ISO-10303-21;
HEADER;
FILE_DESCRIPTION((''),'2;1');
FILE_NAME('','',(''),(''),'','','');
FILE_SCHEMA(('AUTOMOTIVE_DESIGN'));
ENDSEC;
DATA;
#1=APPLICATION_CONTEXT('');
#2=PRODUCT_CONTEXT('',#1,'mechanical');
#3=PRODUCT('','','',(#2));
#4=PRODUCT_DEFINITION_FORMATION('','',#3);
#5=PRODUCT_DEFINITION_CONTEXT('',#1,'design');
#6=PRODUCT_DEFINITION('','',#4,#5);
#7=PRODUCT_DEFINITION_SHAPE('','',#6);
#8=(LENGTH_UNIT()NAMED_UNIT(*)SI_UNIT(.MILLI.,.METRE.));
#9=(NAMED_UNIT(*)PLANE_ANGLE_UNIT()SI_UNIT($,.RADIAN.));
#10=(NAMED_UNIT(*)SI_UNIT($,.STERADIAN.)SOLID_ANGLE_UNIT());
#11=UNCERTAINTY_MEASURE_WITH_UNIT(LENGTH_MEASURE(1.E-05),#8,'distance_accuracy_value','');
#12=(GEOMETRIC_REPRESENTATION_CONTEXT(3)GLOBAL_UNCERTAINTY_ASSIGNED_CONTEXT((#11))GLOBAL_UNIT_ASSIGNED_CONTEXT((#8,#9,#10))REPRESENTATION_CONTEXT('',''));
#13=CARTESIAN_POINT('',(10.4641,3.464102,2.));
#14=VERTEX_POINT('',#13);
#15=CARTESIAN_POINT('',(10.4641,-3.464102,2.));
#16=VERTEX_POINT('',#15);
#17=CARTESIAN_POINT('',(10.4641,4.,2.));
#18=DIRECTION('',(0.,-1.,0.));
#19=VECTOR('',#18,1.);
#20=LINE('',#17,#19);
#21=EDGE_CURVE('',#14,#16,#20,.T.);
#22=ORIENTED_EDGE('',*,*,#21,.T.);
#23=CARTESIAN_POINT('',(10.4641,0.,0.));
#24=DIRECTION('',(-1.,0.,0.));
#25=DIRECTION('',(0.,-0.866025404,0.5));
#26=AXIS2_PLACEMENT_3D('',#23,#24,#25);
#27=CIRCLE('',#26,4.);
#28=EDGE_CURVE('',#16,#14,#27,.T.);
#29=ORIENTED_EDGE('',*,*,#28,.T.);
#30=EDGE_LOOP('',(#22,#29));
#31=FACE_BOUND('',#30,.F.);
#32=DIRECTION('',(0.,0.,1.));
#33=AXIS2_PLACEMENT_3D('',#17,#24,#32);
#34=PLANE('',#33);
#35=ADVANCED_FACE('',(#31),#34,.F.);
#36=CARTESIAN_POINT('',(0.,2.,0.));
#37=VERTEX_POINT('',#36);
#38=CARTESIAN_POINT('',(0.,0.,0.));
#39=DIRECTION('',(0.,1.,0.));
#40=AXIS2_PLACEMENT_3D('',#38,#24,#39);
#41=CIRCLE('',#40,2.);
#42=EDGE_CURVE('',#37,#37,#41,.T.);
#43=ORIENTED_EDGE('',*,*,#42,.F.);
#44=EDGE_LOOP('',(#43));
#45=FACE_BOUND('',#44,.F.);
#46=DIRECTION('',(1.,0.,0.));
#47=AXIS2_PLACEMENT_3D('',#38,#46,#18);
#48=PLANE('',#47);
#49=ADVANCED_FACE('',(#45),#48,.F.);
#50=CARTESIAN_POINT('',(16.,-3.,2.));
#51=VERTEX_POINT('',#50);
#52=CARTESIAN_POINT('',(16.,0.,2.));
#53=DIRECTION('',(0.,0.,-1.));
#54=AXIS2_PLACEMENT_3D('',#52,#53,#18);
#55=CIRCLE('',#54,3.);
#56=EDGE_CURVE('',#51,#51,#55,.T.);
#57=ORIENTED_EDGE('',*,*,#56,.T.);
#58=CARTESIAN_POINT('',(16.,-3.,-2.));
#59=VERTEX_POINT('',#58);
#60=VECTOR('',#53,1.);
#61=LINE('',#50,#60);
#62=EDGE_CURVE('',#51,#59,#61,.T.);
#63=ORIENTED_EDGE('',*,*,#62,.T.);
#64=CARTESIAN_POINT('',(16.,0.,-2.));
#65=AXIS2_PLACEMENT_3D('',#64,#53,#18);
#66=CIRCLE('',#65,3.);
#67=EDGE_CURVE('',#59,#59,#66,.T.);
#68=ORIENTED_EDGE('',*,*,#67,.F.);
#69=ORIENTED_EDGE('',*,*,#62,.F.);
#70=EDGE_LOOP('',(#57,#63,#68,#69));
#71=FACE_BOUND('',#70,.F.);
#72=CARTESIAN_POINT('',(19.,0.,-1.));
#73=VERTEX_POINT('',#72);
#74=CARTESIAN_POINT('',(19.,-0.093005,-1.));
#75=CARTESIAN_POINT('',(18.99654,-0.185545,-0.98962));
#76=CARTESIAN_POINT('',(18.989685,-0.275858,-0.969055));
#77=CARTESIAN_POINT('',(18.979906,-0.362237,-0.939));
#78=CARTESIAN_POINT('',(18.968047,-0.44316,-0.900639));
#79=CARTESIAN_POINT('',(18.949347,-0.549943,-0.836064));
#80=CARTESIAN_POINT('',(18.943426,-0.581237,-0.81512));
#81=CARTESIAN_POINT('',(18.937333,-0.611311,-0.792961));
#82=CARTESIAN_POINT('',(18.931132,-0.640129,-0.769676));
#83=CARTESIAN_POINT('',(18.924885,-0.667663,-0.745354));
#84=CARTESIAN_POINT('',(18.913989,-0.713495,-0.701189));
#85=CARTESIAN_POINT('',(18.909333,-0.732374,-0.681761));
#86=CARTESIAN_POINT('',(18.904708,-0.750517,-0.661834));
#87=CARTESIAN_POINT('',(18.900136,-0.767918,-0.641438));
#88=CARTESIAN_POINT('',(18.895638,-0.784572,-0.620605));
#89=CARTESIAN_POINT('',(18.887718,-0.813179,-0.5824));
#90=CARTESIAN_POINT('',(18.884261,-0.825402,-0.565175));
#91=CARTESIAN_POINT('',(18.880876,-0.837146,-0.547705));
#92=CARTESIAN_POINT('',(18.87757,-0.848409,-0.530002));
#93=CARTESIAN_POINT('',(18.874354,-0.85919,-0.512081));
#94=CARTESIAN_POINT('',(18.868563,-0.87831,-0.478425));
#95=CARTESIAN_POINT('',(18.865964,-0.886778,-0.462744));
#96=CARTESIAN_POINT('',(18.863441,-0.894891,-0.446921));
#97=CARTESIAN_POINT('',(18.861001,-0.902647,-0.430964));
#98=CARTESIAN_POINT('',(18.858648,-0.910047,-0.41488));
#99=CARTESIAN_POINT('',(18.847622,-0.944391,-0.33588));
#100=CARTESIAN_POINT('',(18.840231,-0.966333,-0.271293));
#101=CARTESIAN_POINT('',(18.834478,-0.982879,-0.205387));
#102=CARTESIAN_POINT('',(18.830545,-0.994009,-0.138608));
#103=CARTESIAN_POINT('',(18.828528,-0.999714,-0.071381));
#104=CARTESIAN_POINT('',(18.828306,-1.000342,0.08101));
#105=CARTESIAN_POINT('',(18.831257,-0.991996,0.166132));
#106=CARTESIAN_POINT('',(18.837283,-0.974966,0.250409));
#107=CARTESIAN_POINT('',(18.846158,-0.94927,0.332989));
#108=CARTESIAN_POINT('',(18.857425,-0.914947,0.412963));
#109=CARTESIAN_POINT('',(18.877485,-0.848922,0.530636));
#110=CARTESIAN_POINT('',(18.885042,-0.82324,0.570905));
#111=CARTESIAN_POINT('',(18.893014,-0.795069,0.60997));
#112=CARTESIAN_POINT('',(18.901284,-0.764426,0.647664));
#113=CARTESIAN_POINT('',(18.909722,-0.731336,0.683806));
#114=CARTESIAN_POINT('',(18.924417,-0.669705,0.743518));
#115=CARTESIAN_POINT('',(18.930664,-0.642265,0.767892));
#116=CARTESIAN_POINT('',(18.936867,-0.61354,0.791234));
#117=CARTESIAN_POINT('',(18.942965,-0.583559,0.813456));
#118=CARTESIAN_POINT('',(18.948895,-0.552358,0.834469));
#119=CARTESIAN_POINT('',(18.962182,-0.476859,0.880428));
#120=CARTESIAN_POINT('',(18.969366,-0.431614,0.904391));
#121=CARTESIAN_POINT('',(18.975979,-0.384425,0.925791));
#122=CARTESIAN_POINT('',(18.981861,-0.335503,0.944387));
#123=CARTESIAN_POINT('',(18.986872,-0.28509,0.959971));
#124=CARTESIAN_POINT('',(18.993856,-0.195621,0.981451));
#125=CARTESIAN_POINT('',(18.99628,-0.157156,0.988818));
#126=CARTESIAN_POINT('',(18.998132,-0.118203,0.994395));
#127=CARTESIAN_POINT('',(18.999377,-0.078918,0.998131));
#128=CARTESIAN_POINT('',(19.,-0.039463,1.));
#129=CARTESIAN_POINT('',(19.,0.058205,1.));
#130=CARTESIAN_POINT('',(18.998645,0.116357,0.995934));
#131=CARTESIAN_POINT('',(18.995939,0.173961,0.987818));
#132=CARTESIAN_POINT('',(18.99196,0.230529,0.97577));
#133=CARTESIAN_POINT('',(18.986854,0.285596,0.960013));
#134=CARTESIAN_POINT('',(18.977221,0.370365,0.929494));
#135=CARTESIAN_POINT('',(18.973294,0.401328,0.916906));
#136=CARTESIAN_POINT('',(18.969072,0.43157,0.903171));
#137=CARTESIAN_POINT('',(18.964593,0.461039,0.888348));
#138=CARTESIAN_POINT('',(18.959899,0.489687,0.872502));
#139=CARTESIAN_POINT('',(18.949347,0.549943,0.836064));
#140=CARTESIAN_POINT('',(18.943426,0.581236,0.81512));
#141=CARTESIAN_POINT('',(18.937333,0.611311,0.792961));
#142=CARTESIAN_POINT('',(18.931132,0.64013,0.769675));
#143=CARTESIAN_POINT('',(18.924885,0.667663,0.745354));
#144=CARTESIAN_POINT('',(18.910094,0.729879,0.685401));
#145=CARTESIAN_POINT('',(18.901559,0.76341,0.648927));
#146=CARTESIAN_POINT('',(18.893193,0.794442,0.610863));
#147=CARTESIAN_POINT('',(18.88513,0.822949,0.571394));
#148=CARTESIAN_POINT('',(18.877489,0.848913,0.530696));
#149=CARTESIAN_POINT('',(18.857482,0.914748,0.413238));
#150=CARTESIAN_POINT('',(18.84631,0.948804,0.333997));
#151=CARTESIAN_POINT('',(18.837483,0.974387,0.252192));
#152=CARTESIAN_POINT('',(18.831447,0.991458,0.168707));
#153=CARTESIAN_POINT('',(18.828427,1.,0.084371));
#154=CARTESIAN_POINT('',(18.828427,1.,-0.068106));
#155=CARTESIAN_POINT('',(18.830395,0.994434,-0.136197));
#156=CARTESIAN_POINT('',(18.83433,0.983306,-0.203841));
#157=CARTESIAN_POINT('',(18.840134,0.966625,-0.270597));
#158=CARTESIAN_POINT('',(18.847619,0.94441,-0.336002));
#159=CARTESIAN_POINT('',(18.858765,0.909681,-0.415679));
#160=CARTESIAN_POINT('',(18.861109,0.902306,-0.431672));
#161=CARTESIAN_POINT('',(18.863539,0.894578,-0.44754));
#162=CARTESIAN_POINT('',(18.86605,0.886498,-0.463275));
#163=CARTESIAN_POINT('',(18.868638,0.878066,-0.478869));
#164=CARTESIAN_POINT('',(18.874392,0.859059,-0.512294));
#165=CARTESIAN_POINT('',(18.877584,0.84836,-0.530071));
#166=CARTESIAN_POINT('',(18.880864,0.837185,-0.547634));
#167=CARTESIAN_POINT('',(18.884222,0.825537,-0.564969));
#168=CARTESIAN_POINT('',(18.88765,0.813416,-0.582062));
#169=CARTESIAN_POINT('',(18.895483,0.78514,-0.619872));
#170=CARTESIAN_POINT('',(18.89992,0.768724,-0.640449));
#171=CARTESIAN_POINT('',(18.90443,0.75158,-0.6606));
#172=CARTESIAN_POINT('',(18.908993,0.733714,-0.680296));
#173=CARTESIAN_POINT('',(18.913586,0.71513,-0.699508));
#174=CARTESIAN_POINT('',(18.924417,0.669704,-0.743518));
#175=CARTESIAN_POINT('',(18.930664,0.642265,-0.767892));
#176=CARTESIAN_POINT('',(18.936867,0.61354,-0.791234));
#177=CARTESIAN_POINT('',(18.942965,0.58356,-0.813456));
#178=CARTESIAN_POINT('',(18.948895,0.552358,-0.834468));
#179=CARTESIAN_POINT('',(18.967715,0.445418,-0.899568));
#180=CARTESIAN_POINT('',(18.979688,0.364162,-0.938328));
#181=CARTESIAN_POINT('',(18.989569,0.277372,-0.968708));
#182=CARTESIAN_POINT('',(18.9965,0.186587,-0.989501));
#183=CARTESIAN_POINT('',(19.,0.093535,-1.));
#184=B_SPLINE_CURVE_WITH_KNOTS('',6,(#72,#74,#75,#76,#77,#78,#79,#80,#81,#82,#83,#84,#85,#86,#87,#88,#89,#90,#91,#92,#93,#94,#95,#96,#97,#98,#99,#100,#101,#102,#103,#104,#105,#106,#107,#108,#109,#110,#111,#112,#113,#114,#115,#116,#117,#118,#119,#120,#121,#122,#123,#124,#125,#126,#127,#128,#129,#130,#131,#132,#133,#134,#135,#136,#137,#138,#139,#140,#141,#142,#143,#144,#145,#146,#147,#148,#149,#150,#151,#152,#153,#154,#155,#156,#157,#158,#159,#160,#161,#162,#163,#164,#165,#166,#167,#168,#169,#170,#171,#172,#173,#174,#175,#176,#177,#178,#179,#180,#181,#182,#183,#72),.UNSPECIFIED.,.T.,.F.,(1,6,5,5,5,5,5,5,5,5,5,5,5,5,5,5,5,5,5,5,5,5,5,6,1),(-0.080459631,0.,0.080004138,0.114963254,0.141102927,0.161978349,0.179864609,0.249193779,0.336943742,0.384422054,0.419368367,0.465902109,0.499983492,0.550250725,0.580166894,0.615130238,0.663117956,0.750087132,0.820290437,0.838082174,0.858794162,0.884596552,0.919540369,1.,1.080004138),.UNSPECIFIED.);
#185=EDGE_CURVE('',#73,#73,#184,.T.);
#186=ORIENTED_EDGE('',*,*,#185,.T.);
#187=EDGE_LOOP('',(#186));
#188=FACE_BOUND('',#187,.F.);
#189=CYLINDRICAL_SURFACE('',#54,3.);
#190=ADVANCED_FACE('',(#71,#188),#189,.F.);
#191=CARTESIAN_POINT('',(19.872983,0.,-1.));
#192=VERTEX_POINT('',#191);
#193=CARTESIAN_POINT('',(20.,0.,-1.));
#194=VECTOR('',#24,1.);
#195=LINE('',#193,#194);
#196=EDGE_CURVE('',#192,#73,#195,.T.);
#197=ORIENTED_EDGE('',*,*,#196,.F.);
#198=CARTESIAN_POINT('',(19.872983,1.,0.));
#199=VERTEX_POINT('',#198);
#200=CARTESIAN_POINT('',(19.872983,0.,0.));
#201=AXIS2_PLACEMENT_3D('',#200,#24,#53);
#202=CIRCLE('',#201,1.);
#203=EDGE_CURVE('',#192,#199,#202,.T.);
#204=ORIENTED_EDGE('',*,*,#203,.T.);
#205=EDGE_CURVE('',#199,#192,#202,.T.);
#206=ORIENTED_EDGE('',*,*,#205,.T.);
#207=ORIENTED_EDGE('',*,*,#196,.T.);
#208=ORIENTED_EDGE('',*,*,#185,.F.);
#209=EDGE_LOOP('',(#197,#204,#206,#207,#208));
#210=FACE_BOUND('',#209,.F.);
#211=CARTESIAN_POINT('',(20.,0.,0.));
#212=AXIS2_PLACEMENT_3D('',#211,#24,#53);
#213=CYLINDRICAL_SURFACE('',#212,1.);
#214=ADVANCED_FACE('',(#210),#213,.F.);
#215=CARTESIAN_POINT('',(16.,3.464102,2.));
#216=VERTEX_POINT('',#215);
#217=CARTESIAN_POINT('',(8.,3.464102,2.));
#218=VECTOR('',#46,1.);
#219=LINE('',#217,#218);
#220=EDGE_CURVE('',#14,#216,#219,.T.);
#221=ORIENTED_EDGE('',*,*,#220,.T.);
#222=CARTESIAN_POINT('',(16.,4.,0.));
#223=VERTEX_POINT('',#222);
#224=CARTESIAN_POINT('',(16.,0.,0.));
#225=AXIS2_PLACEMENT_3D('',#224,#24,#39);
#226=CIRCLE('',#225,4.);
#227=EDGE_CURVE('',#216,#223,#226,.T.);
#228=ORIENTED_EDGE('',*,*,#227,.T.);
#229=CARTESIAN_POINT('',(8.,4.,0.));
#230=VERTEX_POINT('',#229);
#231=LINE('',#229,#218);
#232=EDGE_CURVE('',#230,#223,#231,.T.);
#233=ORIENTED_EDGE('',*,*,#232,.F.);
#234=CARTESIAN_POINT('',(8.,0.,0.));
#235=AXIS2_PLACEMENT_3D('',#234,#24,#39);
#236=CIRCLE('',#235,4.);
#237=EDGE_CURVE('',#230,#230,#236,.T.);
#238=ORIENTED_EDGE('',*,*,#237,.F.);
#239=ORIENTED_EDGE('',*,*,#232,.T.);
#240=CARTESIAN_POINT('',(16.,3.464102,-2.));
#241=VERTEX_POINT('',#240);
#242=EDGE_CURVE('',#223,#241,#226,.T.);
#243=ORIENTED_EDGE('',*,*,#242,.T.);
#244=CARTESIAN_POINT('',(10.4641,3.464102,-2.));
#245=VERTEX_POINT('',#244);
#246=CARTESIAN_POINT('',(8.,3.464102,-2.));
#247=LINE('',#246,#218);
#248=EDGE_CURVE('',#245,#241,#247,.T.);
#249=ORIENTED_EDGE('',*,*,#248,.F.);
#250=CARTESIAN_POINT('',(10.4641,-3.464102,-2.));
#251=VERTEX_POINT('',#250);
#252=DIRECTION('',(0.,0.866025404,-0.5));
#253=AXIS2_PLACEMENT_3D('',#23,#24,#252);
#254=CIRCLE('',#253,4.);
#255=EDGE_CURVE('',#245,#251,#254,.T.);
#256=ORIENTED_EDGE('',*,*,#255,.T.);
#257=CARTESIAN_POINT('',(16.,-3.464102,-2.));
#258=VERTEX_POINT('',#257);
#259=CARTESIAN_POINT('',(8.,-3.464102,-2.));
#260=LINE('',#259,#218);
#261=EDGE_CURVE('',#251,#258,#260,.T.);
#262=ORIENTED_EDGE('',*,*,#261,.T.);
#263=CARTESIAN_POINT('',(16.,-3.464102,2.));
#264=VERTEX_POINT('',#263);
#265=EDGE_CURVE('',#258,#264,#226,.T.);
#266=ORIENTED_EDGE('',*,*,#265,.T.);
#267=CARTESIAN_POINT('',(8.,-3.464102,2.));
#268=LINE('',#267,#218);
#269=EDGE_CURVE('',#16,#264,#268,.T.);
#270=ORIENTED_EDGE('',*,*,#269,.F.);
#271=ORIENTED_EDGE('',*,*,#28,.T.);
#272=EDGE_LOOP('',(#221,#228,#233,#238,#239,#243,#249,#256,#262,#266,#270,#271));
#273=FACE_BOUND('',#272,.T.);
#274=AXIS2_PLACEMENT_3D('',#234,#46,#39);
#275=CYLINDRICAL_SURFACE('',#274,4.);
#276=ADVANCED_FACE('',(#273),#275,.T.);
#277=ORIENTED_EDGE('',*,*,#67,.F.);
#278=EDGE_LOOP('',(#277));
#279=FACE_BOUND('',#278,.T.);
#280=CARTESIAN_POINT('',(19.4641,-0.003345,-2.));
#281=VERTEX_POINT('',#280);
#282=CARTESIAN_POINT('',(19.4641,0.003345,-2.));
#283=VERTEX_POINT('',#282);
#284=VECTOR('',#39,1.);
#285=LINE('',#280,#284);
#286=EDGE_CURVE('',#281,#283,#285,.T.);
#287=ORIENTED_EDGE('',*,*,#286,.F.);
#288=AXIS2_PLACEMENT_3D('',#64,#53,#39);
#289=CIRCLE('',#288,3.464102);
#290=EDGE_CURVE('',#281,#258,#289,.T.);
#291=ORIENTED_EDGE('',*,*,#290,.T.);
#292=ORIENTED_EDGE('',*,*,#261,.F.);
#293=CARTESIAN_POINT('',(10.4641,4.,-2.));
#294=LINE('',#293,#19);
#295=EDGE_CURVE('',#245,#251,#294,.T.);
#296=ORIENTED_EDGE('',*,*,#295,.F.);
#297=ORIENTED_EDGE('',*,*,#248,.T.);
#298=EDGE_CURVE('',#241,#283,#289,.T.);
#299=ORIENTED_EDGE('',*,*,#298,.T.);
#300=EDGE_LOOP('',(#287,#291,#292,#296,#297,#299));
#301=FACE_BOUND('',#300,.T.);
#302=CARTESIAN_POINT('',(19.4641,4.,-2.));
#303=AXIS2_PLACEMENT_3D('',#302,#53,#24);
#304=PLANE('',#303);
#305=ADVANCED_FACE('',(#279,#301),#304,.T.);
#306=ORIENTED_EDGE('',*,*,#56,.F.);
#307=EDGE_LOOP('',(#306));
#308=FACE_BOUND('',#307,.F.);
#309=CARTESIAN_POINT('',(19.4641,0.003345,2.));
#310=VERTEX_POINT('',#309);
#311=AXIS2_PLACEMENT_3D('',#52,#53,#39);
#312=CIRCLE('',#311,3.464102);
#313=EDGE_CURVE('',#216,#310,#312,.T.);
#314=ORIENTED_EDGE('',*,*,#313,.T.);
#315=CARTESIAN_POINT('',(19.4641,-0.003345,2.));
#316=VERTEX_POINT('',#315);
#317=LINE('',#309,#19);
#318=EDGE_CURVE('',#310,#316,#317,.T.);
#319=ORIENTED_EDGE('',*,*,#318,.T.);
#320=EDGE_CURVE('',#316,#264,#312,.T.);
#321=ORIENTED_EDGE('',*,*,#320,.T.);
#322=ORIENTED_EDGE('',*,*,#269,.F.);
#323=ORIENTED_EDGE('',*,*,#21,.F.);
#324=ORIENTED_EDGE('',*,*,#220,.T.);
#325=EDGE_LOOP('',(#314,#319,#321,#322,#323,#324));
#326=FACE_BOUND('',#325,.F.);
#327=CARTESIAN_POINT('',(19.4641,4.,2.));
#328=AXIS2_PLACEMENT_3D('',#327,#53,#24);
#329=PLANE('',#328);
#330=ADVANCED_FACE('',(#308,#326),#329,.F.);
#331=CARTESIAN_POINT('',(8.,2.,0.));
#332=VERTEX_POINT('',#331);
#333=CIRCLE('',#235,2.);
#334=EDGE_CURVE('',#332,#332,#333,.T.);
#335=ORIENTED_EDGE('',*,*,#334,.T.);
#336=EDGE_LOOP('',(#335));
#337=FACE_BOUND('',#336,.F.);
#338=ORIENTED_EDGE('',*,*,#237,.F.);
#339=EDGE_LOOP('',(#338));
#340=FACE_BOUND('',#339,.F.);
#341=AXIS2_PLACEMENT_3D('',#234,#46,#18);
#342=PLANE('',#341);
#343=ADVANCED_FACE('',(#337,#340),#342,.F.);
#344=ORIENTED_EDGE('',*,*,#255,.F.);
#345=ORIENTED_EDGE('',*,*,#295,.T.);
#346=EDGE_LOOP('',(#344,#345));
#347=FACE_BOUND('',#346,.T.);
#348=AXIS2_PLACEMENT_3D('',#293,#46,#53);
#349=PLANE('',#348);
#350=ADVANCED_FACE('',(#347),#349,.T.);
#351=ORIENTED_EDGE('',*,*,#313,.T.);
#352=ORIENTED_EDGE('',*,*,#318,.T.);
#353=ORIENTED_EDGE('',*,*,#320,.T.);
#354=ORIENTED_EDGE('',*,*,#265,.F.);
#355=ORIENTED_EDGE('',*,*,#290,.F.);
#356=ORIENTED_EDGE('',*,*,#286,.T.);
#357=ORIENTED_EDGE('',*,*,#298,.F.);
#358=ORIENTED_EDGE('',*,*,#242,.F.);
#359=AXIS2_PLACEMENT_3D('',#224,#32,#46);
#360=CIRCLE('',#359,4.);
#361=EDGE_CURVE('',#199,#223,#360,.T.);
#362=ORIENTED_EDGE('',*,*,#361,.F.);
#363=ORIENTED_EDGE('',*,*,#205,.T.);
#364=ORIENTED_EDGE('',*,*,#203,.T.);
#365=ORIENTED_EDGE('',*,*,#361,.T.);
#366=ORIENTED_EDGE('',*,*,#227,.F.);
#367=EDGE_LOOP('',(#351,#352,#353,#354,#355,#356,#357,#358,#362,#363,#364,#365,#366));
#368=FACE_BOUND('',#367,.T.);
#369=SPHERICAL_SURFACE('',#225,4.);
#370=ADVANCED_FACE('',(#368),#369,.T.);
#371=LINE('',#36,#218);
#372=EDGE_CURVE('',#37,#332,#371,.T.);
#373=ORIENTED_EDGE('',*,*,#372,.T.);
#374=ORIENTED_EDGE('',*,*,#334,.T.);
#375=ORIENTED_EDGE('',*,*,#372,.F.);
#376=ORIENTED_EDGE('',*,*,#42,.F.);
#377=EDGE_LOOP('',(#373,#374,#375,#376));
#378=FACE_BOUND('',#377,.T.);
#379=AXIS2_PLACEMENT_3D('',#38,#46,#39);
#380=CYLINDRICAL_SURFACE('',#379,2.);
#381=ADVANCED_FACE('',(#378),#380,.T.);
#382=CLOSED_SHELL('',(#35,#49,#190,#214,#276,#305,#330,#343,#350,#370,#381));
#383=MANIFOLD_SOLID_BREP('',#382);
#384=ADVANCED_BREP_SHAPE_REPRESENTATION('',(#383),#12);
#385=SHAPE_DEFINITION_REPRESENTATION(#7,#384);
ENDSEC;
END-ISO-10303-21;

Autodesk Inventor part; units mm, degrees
ref_plane "XY Plane" through (0, 0, 0) normal (0, 0, 1) x (1, 0, 0)
sketch "Sketch1" plane through (0, 0, 0) normal (0, 0, 1) x (1, 0, 0)
  line L0 (0, 0) -> (0, 2)
  line L1 (0, 2) -> (8, 2)
  line L2 (8, 2) -> (8, 4)
  line L3 (8, 4) -> (16, 4)
  arc A0 (20, 0) -> (16, 4) centre (16, 0) ccw
  line L4 (20, 0) -> (0, 0)
  dimension "d0" = 4
  dimension "d1" = 8
  dimension "d2" = 8
  dimension "d3" = 4
  dimension "d4" = 8
revolve "Revolution1" add sketch "Sketch1" angle 360 about axis through (20, 0, 0) along (-1, 0, 0)
thread "Thread1" size "M4x0.7" class "6g" standard "ISO Metric profile" length 11 offset 3
ref_plane "Work Plane2" through (0, 4, 0) normal (0, 1, 0) x (-1, 0, 0)
sketch "Sketch3" plane through (0, 4, 0) normal (0, 1, 0) x (-1, 0, 0)
  arc A0 (-16, 4) -> (-16, -4) centre (-16, 0) ccw projected
  line L0 (-16, -4) -> (-8, -4) projected
  line L1 (-8, -4) -> (-8, 4) projected
  line L2 (-16, 4) -> (-8, 4) projected
  line L3 (-19.4641, -2) -> (-10.4641, -2)
  line L4 (-10.4641, -2) -> (-10.4641, -4)
  line L5 (-19.4641, 2) -> (-10.4641, 2)
  line L6 (-10.4641, 2) -> (-10.4641, 4)
  point P0 (0, 0)
  dimension "d10" = 9
  dimension "d11" = 4
  dimension "d12" = 2
extrude "Extrusion1" cut sketch "Sketch3" against normal blind 8 contours L2 L6 L5 A0 | L3 L4 L0 A0
sketch "Sketch4" plane through (10.4641, -3.4641, 2) normal (0, 0, 1) x (1, 0, 0)
  arc A0 (5.5359, 0) -> (5.5359, 6.9282) centre (5.5359, 3.4641) ccw projected
  point P0 (-10.4641, 3.4641)
  point P1 (5.5359, 3.4641)
hole "Hole1" at (16, 0, 2) direction (0, 0, -1) diameter 6 depth 4
ref_plane "Work Plane3" through (20, 0, 0) normal (1, 0, 0) x (0, 1, 0)
sketch "Sketch5" plane through (20, 0, 0) normal (1, 0, 0) x (0, 1, 0)
  point P0 (0, 0)
  point P1 (0, 0)
hole "Hole2" at (20, 0, 0) direction (-1, 0, 0) diameter 2 depth 2.5
equation "\"d12\" = 0.5 * d11"
properties part number "9"
